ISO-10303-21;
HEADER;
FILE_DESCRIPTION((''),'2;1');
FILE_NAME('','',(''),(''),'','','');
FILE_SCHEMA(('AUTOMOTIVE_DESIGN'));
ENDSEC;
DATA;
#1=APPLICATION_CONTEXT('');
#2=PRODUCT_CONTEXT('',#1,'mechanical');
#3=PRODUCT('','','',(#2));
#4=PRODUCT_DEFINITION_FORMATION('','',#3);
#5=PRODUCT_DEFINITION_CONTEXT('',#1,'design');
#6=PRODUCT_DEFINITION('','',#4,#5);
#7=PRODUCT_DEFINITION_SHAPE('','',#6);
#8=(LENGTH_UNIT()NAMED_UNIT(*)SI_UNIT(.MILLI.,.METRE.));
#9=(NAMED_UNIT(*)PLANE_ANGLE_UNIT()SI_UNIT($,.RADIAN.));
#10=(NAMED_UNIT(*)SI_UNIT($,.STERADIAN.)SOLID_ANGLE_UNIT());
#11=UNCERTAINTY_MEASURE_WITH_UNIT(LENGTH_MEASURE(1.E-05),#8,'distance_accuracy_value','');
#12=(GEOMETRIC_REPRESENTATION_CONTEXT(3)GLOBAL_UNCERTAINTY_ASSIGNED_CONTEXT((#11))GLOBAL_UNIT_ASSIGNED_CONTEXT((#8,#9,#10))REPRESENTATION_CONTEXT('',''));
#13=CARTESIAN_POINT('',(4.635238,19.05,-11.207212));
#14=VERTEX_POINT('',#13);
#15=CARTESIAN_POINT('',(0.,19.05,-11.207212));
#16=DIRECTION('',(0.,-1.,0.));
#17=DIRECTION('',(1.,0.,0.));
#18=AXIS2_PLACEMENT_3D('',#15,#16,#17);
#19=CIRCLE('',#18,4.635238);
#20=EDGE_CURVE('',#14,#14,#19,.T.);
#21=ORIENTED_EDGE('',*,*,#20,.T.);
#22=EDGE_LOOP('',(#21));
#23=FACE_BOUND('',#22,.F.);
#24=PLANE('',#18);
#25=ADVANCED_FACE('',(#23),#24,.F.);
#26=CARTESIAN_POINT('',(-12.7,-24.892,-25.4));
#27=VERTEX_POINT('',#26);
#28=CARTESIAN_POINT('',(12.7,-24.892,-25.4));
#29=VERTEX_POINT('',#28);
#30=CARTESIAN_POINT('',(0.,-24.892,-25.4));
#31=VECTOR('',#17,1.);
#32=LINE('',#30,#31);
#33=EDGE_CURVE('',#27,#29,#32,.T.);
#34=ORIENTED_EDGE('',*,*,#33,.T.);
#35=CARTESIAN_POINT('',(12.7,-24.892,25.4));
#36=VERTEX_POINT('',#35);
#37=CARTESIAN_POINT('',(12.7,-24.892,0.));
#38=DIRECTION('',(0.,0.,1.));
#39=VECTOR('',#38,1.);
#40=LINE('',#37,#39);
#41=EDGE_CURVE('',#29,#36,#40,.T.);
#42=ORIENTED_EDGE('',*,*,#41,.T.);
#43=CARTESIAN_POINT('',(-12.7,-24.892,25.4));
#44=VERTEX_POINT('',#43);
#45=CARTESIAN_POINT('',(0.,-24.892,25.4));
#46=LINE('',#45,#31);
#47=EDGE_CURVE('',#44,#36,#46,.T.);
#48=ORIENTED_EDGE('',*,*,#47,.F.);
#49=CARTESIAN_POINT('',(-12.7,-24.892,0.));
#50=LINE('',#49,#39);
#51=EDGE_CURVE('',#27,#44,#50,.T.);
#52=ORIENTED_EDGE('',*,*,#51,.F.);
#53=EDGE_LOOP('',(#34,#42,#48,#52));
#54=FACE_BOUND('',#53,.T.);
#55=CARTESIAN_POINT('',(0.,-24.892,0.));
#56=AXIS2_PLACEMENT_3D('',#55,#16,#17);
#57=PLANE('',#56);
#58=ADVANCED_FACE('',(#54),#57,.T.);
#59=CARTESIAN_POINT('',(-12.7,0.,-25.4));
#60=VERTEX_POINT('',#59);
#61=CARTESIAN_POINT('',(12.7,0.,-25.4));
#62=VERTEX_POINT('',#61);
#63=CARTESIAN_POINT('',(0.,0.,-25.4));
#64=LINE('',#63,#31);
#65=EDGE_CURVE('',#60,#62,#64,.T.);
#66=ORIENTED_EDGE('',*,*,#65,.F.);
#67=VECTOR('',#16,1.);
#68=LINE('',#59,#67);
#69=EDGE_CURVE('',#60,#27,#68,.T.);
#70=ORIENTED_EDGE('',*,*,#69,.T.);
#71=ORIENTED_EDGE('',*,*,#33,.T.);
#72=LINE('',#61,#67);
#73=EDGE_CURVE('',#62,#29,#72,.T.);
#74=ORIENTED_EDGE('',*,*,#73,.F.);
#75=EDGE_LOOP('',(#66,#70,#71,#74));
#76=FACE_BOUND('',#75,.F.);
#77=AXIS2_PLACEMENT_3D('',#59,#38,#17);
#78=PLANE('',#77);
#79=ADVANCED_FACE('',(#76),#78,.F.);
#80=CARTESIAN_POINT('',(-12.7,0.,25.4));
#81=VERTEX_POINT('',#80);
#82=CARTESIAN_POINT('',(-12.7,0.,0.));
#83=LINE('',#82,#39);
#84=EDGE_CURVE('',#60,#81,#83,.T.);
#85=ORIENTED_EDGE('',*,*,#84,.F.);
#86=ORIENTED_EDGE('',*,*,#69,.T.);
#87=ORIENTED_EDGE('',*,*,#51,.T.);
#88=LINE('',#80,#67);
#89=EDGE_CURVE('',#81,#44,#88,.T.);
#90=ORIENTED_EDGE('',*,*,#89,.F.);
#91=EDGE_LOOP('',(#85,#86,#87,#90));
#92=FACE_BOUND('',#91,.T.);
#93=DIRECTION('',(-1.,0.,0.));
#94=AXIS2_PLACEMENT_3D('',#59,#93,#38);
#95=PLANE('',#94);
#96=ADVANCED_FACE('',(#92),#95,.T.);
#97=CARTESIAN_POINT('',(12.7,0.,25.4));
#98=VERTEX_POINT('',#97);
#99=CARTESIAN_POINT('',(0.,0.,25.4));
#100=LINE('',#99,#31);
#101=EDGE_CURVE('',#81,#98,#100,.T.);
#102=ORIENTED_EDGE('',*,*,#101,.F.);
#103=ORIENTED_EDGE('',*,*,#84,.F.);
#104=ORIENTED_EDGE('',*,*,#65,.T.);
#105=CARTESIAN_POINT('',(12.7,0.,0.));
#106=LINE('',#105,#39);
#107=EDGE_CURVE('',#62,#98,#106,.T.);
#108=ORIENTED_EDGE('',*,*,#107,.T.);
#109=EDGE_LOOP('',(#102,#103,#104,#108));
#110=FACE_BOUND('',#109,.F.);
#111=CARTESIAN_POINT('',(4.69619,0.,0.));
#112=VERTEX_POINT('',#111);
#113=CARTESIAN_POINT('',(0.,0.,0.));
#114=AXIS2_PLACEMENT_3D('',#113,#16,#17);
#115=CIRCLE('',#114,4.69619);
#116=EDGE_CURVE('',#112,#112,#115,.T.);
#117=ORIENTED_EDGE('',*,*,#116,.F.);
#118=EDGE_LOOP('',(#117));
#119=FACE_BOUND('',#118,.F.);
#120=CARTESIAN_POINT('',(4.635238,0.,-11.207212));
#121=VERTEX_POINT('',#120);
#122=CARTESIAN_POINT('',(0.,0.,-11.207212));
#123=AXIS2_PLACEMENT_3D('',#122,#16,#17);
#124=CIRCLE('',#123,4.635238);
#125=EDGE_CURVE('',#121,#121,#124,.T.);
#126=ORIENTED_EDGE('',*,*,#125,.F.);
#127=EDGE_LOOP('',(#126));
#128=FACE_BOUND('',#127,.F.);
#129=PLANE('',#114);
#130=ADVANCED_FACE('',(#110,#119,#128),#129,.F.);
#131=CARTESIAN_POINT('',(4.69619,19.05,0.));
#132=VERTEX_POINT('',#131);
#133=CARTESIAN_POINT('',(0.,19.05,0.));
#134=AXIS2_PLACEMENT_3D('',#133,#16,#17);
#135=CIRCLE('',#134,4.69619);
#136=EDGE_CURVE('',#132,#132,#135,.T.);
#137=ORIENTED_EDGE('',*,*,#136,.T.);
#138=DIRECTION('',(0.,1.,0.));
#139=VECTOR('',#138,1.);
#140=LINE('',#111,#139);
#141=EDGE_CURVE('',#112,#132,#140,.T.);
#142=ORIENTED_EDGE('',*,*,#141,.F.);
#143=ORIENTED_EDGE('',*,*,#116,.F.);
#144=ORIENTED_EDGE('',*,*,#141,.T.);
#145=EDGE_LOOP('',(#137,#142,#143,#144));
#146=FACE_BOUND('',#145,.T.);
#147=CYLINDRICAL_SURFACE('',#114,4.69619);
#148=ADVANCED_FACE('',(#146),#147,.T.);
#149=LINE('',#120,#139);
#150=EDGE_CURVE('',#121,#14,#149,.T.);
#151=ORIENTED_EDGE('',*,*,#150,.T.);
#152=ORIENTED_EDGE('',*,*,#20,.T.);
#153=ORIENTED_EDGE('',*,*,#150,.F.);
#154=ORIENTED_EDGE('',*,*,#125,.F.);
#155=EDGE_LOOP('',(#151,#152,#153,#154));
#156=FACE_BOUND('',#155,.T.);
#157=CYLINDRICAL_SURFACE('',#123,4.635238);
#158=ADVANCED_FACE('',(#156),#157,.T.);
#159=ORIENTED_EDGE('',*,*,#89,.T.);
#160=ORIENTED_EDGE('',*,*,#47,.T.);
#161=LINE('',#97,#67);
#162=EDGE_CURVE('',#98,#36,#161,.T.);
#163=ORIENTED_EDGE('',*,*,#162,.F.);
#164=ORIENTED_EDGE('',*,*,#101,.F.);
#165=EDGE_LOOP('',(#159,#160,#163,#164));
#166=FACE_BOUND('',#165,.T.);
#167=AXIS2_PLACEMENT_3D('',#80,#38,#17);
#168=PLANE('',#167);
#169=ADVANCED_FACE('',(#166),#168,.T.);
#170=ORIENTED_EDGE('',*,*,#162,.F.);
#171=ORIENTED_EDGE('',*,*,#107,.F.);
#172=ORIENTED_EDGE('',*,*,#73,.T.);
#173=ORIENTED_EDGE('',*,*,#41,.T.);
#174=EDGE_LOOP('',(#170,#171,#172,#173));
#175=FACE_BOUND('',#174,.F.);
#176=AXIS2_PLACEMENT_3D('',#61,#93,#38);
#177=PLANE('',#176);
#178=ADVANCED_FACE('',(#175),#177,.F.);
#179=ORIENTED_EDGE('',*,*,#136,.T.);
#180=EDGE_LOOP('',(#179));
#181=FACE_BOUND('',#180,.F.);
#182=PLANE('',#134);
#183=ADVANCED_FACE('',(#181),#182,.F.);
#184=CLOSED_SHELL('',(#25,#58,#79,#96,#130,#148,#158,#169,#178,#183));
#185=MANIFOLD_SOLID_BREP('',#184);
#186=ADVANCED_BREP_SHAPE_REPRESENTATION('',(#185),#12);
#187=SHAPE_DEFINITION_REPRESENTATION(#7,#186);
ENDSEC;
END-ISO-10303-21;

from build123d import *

# Parameters (mm, degrees)
F0_W     = 25.4
F0_H     = 50.8
F1_DEPTH = 24.892
F2_R     = 4.6961896277
F2_R_2   = 4.6352376904
F3_DEPTH = 19.05


# Not quite as in the source:
# - a feature names something its author has since deleted; it is built from what else it names


with BuildPart() as f1:
    # F0 (on Front) → F1 (new body)
    with BuildSketch(Plane.XZ):
        Rectangle(F0_W, F0_H)
    extrude(amount=F1_DEPTH)

    # F2 (on Front) → F3 (join)
    with BuildSketch(Plane.XZ):
        Circle(F2_R)
        with Locations((0, -11.2072117627)):
            Circle(F2_R_2)
    extrude(amount=-F3_DEPTH)


solid = f1.part
